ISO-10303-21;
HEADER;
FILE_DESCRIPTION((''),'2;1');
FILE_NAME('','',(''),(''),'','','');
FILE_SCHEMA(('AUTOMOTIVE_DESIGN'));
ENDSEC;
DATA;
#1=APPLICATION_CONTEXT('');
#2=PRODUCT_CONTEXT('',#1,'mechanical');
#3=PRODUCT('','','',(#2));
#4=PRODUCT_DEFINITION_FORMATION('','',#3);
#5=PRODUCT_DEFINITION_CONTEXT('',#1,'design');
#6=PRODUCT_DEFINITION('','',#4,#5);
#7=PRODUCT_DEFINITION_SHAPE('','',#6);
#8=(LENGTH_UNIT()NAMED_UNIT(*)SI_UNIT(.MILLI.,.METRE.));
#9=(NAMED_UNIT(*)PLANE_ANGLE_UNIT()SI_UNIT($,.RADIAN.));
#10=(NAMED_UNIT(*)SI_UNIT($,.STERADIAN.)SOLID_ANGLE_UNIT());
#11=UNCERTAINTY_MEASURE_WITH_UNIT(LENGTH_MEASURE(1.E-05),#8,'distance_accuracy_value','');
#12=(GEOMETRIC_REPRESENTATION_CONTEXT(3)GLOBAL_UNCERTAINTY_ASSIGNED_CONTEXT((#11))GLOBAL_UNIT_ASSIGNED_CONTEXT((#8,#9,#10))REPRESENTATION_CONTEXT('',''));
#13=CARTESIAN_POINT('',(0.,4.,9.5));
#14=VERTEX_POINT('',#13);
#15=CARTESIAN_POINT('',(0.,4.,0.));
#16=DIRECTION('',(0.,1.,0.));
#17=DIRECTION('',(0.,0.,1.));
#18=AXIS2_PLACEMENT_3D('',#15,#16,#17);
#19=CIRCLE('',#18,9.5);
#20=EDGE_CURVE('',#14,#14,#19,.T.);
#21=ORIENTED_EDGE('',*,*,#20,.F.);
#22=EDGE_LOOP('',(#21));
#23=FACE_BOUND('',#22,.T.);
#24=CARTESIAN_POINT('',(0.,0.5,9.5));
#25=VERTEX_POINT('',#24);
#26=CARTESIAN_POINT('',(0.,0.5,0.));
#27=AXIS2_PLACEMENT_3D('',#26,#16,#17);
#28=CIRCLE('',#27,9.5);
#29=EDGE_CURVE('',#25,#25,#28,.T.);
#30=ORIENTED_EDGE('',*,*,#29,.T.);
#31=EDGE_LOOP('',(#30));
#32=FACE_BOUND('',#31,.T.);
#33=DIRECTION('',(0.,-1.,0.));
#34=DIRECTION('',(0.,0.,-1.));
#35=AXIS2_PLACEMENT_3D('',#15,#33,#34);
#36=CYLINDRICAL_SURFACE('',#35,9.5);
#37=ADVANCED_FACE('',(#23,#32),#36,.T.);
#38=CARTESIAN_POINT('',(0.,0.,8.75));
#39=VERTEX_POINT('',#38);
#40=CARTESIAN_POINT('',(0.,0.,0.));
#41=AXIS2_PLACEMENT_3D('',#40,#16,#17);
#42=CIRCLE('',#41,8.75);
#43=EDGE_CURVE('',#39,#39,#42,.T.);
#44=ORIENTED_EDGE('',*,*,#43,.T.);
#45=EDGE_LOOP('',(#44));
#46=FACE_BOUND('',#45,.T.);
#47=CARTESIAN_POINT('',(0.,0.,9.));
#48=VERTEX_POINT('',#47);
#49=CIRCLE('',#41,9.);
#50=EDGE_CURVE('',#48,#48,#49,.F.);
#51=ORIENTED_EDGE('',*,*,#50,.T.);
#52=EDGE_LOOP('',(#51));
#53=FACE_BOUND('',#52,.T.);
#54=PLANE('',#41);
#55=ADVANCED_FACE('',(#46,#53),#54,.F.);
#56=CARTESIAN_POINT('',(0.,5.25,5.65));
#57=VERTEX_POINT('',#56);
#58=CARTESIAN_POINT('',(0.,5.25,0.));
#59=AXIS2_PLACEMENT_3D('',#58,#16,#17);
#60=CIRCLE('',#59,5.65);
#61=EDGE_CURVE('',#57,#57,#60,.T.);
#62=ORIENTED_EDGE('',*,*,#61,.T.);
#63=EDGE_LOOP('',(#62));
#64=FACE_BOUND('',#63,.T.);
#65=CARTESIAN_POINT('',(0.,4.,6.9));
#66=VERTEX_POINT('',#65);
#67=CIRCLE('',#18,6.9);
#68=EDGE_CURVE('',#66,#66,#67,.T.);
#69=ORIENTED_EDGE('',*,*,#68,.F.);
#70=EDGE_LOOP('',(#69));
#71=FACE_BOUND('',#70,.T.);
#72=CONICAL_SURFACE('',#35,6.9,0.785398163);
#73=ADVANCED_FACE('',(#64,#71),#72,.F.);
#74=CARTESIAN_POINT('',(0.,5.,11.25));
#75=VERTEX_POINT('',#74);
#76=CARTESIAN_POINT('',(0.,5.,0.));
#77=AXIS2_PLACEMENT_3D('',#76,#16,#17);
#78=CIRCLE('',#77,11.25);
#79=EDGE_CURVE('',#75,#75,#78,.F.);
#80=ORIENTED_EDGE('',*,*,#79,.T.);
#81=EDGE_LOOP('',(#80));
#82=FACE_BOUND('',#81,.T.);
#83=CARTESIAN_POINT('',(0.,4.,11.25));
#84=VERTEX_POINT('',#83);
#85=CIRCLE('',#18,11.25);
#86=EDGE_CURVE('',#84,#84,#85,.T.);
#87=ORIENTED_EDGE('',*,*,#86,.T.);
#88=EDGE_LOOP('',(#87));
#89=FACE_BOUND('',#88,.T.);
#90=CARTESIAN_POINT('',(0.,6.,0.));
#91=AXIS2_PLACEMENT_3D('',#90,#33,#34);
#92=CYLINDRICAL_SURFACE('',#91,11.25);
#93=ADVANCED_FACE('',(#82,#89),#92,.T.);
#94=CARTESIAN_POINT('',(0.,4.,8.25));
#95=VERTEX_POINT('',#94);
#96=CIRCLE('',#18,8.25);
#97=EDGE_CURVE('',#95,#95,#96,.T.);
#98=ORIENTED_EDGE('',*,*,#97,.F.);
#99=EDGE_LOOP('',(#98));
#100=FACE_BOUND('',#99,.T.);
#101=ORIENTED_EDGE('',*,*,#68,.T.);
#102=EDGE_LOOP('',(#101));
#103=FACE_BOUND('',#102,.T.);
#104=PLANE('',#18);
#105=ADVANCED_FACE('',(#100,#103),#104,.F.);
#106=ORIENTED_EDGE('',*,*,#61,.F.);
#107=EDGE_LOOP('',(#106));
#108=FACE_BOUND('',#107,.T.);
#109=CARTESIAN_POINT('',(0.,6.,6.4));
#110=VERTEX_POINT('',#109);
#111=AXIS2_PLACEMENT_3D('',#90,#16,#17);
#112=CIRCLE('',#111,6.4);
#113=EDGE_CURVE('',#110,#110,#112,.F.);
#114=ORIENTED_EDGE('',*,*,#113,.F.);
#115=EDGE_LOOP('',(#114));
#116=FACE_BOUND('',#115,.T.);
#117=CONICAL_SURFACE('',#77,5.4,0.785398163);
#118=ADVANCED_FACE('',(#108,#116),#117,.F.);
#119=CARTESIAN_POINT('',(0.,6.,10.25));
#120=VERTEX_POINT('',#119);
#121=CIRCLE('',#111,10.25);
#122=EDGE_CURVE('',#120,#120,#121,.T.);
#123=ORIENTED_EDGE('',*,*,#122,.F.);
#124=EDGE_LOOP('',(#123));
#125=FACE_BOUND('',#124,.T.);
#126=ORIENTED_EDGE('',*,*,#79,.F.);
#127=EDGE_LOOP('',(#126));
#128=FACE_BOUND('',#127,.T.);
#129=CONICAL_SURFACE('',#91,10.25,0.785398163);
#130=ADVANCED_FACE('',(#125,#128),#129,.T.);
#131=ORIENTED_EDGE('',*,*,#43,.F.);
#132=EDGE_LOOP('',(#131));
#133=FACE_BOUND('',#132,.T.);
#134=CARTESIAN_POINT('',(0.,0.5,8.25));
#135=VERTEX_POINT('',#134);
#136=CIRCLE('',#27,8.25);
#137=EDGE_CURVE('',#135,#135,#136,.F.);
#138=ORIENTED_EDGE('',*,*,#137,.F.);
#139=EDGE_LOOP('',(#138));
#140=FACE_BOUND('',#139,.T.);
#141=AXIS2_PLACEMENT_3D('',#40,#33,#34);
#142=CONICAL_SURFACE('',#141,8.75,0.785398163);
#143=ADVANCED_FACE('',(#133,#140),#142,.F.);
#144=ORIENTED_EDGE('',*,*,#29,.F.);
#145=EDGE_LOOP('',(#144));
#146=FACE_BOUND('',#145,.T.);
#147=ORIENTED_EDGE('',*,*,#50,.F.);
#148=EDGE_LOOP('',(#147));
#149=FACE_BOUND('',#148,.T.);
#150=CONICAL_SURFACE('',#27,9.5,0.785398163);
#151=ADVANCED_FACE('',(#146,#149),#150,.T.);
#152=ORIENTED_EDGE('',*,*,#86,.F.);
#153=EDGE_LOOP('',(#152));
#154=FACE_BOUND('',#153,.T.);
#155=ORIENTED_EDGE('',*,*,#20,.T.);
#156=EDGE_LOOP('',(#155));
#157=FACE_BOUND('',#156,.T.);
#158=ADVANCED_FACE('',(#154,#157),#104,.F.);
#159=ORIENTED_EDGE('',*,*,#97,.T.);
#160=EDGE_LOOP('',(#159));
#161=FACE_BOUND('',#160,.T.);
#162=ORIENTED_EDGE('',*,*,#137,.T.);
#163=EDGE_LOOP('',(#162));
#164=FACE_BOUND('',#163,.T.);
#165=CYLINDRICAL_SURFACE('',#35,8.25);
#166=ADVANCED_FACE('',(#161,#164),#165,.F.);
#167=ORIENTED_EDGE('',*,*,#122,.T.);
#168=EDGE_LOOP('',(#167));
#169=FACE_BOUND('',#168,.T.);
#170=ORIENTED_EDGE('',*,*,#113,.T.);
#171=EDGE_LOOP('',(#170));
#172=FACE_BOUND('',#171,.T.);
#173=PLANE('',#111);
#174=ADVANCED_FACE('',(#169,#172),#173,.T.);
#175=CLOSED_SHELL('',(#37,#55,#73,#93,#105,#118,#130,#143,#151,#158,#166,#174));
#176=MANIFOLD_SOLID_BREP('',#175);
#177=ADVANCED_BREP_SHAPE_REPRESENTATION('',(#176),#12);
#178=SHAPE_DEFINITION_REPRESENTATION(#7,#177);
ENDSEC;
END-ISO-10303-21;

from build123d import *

# Parameters (mm, degrees)
SKETCH1_R               = 9.5
SKETCH1_R_2             = 8.25
BOSS_EXTRUDE1_DEPTH     = 4
SKETCH2_R               = 11.25
BOSS_EXTRUDE2_DEPTH     = 2
CUT_EXTRUDE1_DEPTH      = 18.003676073
CUT_EXTRUDE1_DEPTH_BACK = 18.003676073
SKETCH3_R               = 5.4
CHAMFER1_SIZE           = 1.5
CHAMFER2_SIZE           = 0.5
CHAMFER3_SIZE           = 1


with BuildPart() as part:
    # Sketch1 → Boss-Extrude1 (new body)
    with BuildSketch(Plane(origin=(0, 0, 0), x_dir=(1, 0, 0), z_dir=(0, 1, 0))):
        with Locations(Location((0, 0, 0), (0, 0, 270))):
            Circle(SKETCH1_R)
        with Locations(Location((0, 0, 0), (0, 0, 270))):
            Circle(SKETCH1_R_2, mode=Mode.SUBTRACT)
    extrude(amount=BOSS_EXTRUDE1_DEPTH)

    # Sketch2 → Boss-Extrude2 (add)
    with BuildSketch(Plane(origin=(0, 4, 0), x_dir=(1, 0, 0), z_dir=(0, 1, 0))):
        with Locations(Location((0, 0, 0), (0, 0, 270))):
            Circle(SKETCH2_R)
    extrude(amount=BOSS_EXTRUDE2_DEPTH)

    # Sketch3 → Cut-Extrude1 (cut, two sides: drawn at the far end of the back side and taken through both)
    with BuildSketch(Plane(origin=(0, 6, 0), x_dir=(1, 0, 0), z_dir=(0, 1, 0)).offset(-CUT_EXTRUDE1_DEPTH_BACK)):
        with Locations(Location((0, 0, 0), (0, 0, 270))):
            Circle(SKETCH3_R)
    extrude(amount=CUT_EXTRUDE1_DEPTH + CUT_EXTRUDE1_DEPTH_BACK, mode=Mode.SUBTRACT)

    # Chamfer1
    chamfer1_edges = [part.edges().sort_by_distance(p)[0] for p in [
        (0, 4, -5.4),
    ]]
    chamfer(chamfer1_edges, length=CHAMFER1_SIZE)

    # Chamfer2
    chamfer2_edges = [part.edges().sort_by_distance(p)[0] for p in [
        (0, 0, -9.5),
        (0, 0, -8.25),
    ]]
    chamfer(chamfer2_edges, length=CHAMFER2_SIZE)

    # Chamfer3
    # the kernel refuses this chamfer: 1 mm, written as the material it takes off along each edge
    with BuildSketch(Plane(origin=(0, 6, 0), x_dir=(0, 0, 1), z_dir=(-1, 0, 0))) as chamfer3_piece_1:
        Polygon((11.25 - CHAMFER3_SIZE, 0), (11.25, -CHAMFER3_SIZE), (11.25, 0), align=None)
    revolve(axis=Axis((0, 6, 0), (0, 1, 0)), mode=Mode.SUBTRACT)
    with BuildSketch(Plane(origin=(0, 6, 0), x_dir=(0, 0, 1), z_dir=(-1, 0, 0))) as chamfer3_piece_2:
        Polygon((5.4, -CHAMFER3_SIZE), (5.4 + CHAMFER3_SIZE, 0), (5.4, 0), align=None)
    revolve(axis=Axis((0, 6, 0), (0, 1, 0)), mode=Mode.SUBTRACT)


solid = part.part
